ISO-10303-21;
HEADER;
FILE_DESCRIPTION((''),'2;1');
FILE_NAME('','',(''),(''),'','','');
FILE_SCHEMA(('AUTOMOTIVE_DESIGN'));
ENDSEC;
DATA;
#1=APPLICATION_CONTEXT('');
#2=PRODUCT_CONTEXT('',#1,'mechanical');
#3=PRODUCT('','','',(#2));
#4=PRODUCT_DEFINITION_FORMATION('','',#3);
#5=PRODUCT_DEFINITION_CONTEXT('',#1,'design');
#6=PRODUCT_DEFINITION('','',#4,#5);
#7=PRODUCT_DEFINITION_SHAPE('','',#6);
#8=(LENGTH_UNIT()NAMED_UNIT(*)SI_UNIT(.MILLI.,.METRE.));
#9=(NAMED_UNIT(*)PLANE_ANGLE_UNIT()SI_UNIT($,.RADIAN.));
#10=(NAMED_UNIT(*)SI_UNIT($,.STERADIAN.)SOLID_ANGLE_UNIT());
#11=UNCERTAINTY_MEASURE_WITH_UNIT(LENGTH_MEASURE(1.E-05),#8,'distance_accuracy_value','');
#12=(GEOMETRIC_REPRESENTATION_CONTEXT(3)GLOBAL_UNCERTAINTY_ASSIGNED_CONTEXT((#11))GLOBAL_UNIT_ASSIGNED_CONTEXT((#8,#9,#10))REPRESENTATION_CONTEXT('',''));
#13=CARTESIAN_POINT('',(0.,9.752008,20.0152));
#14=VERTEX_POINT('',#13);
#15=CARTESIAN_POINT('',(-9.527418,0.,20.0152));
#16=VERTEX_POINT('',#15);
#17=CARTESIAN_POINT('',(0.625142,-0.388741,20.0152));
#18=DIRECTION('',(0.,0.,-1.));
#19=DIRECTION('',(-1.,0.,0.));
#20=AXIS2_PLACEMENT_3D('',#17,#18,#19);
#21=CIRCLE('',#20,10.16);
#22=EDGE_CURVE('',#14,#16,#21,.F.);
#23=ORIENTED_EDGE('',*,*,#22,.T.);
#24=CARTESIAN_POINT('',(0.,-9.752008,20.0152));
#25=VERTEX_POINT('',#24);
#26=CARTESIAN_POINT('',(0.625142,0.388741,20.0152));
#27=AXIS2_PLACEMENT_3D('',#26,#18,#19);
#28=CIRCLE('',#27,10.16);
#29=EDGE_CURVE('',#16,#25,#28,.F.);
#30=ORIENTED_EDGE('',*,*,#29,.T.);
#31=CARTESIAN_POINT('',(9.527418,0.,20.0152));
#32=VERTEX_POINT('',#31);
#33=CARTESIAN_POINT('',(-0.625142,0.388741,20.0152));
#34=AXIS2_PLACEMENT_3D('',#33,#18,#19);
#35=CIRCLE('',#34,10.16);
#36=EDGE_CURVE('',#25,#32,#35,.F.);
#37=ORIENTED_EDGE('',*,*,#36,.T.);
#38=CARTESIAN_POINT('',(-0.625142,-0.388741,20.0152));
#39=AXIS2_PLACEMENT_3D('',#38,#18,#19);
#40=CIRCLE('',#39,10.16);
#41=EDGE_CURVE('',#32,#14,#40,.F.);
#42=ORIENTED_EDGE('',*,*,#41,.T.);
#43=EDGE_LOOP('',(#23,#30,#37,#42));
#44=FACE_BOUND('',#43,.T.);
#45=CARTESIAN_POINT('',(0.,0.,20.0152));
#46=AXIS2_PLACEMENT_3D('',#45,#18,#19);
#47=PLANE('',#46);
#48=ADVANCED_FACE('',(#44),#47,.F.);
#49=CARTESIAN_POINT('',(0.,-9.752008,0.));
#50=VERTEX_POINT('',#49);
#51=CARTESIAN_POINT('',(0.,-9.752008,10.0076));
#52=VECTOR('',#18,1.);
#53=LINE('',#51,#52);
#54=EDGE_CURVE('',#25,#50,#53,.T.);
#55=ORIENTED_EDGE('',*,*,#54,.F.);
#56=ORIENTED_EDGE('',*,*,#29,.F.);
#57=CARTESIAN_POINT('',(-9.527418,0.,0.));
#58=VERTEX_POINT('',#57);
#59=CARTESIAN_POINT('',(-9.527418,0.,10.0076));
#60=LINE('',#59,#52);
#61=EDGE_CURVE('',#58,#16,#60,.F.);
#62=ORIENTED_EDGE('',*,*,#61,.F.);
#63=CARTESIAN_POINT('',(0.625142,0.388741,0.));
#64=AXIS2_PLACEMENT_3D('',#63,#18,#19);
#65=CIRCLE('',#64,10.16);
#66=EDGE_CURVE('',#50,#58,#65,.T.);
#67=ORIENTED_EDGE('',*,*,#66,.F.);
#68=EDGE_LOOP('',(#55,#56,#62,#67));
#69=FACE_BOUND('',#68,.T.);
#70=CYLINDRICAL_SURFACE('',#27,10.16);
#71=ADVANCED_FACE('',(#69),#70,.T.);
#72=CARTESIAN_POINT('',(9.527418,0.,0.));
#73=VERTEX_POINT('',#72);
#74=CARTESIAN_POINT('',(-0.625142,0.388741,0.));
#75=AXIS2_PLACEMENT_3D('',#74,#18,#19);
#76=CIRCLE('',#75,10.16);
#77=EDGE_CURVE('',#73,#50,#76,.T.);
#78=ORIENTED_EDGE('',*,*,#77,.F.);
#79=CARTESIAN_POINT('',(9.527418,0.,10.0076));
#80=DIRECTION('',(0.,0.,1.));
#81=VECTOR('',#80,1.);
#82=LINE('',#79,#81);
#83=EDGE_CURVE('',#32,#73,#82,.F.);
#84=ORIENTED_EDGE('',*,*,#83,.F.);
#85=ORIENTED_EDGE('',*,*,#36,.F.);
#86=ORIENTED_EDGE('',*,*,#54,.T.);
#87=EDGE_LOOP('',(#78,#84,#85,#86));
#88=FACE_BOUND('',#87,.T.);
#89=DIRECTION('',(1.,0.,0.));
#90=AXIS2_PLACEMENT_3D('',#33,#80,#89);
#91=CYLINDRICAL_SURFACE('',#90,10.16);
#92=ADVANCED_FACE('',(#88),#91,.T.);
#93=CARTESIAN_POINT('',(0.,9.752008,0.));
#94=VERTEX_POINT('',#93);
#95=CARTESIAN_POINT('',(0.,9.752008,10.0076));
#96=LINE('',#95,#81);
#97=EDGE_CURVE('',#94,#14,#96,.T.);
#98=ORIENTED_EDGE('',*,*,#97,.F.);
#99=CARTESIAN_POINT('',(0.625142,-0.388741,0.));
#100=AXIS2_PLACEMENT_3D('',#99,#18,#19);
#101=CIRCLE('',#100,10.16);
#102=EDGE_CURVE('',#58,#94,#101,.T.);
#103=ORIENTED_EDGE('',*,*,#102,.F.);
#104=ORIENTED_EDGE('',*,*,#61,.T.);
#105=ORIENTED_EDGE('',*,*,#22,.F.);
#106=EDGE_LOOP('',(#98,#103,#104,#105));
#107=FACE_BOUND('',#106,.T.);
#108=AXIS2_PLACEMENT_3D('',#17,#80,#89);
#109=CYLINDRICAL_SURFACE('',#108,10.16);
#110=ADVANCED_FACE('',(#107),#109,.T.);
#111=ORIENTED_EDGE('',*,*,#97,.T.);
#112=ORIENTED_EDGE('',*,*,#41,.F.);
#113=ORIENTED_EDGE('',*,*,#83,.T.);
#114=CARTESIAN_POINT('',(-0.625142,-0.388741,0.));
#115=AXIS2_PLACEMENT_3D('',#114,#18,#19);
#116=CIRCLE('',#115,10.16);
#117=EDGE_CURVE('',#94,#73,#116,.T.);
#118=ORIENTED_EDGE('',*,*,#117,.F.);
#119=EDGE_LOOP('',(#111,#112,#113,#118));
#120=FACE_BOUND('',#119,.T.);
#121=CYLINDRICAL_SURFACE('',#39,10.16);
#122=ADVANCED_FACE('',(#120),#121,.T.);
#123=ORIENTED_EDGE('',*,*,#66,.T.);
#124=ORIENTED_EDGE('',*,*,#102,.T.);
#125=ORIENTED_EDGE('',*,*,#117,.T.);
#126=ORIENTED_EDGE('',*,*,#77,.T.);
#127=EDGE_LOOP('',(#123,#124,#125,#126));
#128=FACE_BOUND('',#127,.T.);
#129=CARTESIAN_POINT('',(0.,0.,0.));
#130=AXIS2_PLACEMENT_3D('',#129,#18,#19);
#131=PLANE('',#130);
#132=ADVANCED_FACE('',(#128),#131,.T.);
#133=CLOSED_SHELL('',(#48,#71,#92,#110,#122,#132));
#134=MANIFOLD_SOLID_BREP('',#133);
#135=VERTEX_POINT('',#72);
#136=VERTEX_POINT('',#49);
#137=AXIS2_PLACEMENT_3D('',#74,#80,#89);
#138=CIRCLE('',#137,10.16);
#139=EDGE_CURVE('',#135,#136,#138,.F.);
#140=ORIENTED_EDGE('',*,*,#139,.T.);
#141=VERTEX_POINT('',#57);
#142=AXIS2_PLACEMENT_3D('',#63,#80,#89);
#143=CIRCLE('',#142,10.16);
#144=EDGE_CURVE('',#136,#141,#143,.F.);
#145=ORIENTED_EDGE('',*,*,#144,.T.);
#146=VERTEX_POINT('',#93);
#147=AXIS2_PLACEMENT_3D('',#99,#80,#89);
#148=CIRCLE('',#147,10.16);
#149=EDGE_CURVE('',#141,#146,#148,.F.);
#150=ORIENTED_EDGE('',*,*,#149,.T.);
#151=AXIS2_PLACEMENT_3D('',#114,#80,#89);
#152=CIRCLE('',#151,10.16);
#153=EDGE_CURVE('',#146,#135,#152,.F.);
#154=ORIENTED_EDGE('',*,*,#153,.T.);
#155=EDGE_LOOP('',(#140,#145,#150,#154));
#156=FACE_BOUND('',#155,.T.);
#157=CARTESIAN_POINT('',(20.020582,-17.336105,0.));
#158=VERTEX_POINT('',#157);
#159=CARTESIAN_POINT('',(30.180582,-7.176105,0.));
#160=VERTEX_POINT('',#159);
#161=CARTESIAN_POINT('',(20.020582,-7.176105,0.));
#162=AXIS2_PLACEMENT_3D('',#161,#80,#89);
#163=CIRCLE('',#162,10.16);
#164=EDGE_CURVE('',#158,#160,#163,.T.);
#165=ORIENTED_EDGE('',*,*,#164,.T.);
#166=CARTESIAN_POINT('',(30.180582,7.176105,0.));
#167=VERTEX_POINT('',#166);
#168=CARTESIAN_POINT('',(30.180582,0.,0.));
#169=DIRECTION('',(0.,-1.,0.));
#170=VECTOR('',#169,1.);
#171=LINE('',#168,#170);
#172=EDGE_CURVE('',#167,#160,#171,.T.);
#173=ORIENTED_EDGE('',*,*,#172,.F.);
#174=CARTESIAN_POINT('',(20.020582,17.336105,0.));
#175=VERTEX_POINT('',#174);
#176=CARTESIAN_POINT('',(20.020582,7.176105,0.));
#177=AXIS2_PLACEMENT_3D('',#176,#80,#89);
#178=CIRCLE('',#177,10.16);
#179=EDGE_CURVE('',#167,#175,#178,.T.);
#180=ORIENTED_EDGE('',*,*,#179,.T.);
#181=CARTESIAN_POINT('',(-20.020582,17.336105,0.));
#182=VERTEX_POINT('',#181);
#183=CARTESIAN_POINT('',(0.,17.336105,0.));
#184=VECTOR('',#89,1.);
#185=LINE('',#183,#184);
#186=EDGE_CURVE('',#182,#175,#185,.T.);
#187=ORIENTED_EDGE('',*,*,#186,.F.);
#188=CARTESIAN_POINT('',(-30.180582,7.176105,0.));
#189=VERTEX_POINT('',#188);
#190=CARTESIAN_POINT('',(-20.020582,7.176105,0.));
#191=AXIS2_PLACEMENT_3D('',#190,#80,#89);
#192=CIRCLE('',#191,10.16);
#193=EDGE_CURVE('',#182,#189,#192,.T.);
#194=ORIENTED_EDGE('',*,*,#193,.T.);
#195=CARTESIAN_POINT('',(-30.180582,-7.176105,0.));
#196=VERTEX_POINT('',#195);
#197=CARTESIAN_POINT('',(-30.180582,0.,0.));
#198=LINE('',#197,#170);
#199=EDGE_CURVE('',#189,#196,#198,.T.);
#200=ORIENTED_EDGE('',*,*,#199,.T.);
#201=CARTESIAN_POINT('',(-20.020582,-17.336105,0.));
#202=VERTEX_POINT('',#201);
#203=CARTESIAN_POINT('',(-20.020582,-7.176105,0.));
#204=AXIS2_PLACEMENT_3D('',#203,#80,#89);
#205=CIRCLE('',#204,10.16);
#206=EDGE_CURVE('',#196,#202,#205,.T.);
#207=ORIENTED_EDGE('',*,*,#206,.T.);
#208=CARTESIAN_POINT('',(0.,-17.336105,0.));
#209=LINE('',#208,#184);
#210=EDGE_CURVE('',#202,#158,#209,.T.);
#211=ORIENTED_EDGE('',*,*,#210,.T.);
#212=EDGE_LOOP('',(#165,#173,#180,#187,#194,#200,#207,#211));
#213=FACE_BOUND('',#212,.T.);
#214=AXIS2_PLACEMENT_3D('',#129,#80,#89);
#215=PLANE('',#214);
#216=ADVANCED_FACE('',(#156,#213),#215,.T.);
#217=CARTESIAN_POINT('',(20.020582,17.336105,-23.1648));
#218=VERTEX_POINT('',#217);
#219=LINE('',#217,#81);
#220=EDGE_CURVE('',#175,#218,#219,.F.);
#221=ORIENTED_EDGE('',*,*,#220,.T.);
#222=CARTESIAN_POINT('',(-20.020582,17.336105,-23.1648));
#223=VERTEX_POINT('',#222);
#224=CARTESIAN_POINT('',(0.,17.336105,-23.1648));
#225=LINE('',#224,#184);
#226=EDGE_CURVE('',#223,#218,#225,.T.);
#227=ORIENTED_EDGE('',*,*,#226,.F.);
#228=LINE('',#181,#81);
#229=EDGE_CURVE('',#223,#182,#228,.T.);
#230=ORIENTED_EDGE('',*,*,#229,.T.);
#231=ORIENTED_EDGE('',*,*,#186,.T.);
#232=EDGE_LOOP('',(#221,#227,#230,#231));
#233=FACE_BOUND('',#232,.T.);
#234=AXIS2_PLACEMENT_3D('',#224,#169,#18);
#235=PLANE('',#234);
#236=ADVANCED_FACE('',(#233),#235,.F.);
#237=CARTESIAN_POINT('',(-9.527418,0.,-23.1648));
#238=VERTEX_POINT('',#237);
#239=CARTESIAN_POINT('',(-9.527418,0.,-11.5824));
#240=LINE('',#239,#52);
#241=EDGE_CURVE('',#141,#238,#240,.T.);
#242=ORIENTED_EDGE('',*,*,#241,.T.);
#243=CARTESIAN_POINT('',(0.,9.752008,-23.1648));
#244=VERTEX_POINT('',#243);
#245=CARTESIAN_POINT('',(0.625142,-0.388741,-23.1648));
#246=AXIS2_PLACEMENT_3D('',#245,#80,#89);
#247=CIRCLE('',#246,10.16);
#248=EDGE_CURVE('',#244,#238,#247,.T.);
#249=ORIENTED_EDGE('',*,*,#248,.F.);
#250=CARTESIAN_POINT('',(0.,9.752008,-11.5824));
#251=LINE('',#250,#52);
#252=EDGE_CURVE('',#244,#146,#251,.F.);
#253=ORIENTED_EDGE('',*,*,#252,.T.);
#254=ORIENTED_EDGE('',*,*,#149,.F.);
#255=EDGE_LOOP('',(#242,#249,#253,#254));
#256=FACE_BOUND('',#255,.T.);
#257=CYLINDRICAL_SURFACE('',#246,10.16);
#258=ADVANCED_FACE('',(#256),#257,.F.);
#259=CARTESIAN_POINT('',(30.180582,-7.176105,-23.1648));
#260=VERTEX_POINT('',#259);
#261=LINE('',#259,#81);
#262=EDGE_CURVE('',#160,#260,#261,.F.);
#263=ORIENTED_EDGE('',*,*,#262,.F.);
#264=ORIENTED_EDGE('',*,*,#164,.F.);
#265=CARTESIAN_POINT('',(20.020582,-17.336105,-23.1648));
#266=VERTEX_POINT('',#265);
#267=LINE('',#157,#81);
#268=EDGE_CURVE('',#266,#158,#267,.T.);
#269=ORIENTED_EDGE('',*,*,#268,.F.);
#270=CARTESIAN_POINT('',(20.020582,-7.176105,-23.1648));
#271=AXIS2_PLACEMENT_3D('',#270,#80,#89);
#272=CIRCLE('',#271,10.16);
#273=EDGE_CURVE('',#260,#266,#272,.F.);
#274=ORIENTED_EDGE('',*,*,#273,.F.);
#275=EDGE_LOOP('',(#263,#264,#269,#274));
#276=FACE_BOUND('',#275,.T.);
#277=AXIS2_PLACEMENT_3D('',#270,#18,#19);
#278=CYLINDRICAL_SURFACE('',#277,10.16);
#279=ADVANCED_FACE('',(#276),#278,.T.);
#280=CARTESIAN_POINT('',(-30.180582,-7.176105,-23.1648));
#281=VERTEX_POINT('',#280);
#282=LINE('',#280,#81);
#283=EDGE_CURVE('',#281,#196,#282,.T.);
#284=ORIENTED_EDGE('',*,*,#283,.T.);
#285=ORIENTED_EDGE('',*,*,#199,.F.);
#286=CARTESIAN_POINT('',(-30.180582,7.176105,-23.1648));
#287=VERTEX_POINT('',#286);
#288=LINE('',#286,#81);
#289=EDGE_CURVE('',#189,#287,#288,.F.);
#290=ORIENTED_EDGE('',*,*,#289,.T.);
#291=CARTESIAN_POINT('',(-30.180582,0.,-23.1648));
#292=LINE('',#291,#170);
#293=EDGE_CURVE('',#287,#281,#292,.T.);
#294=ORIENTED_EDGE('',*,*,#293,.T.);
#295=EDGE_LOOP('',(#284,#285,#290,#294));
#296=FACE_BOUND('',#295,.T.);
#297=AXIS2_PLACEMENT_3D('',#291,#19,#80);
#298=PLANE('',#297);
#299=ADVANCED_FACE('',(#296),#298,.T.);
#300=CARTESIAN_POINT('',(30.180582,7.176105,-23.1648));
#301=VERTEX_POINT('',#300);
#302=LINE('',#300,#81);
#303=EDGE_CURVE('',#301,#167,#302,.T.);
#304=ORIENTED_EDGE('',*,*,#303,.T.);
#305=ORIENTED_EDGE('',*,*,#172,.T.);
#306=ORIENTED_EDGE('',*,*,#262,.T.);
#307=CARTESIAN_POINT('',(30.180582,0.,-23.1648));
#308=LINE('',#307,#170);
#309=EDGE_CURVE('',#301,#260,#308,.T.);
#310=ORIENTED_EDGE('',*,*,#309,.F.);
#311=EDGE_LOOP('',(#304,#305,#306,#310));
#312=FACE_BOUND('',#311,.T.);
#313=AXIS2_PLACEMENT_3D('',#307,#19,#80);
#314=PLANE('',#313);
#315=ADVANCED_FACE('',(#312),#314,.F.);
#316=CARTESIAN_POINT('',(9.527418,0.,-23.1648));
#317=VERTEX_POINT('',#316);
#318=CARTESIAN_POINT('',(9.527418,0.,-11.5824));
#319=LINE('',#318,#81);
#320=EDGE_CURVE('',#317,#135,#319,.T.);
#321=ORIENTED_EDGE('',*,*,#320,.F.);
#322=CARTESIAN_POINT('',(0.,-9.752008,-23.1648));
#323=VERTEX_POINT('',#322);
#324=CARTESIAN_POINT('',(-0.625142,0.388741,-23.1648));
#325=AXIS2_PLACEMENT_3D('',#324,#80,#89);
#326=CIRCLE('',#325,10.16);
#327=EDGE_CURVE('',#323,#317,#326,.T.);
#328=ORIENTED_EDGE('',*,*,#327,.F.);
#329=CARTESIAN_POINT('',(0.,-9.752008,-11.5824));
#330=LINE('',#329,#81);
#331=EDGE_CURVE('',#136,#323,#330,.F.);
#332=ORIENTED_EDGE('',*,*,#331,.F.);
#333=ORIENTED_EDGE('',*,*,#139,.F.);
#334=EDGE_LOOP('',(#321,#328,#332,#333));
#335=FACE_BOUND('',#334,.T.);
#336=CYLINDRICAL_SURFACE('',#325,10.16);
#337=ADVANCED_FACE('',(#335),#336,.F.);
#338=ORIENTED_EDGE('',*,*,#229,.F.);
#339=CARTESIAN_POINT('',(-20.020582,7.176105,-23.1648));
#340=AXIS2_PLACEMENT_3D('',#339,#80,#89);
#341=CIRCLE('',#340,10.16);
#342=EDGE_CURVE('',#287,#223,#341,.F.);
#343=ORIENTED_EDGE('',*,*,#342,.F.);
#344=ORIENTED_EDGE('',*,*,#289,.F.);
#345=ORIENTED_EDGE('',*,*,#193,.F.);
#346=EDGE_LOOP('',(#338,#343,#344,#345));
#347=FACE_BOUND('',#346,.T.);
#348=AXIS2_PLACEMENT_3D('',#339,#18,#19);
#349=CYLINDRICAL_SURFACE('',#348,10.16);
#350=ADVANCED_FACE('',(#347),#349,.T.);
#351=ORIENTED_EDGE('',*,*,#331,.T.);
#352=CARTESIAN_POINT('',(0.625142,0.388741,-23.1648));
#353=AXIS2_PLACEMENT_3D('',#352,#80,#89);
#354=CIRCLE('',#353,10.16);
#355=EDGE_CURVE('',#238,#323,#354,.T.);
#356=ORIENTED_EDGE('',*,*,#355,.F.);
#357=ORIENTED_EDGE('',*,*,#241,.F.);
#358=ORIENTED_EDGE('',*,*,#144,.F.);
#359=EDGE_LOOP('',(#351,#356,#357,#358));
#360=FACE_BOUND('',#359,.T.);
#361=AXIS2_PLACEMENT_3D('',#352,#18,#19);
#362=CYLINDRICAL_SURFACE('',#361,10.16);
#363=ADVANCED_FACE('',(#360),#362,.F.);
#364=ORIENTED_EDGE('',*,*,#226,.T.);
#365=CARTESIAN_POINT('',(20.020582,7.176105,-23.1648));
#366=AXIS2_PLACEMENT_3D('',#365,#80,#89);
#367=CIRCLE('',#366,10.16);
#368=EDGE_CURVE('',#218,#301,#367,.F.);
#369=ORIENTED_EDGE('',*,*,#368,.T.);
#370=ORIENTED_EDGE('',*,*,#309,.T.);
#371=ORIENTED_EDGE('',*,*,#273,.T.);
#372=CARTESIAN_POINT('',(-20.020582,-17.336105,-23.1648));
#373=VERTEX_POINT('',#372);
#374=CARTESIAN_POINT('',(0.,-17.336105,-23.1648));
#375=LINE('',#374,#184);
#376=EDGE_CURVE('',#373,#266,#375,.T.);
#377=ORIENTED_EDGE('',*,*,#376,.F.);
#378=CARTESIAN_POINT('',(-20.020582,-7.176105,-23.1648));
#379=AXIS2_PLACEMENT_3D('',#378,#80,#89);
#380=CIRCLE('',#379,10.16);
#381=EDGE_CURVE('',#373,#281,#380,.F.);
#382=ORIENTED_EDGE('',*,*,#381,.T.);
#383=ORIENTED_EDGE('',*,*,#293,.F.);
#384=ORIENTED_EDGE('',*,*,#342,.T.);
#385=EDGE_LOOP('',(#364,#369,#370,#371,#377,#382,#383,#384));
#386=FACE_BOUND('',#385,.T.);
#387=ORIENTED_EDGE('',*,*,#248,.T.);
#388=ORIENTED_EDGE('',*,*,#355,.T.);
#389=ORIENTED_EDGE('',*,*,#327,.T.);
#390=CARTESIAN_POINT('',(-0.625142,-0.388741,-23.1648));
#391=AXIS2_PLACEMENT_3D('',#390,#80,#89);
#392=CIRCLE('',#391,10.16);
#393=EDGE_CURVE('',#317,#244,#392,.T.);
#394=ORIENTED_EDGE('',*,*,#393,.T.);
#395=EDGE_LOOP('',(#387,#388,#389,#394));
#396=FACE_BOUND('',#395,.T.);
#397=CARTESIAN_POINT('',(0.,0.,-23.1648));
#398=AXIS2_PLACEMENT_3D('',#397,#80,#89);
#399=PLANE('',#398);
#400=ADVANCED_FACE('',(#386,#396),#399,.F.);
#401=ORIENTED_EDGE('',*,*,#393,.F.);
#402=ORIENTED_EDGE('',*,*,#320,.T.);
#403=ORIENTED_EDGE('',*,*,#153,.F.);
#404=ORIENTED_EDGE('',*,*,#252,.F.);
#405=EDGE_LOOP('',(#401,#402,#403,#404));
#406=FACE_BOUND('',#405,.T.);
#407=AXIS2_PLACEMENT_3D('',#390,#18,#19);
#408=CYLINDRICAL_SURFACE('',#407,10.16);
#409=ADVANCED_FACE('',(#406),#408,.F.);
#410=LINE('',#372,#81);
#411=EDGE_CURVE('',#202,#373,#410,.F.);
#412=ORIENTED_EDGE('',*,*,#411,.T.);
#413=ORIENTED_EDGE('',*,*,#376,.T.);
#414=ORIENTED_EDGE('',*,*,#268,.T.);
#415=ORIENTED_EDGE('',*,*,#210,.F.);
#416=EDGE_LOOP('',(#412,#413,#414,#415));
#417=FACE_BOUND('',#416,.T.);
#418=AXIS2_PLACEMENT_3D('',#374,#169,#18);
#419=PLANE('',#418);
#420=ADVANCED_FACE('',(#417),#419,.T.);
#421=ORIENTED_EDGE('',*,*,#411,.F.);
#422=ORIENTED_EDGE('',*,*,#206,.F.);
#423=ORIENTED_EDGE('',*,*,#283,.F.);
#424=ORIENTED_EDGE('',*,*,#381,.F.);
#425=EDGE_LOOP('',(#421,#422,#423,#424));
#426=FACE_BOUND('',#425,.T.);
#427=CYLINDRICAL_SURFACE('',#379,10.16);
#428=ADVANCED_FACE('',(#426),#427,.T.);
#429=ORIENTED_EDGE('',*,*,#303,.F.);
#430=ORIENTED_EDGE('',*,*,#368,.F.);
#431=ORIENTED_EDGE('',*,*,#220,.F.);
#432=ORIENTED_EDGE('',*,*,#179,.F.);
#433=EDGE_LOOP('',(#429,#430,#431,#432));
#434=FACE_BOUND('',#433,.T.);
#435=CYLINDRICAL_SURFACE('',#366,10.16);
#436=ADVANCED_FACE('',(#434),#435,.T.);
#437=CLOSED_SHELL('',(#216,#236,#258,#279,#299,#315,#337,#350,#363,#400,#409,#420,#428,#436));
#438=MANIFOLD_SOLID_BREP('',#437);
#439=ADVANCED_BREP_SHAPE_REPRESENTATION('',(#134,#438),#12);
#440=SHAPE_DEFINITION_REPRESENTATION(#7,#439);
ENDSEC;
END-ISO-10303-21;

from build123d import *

# Parameters (mm, degrees)
SKETCH1_W           = 47.674288096
SKETCH1_H           = 48.856295238
BOSS_EXTRUDE1_DEPTH = 50.038
SKETCH1_4_W         = 150.902911904
SKETCH1_4_H         = 86.68052381
SKETCH1_4_W_2       = 47.674288096
SKETCH1_4_H_2       = 48.856295238
BOSS_EXTRUDE2_DEPTH = 57.912
FILLET1_R           = 25.4
FILLET2_R           = 25.4
SCALE2_SCALE        = 0.4


with BuildPart() as part:
    # Sketch1 → Boss-Extrude1 (new body)
    with BuildSketch(Plane.XY):
        Rectangle(SKETCH1_W, SKETCH1_H)
    extrude(amount=BOSS_EXTRUDE1_DEPTH)

    # Fillet2
    # the kernel refuses this fillet: 25.4 mm, written as the material it takes off along each edge
    with BuildSketch(Plane(origin=(23.837144048, 24.428147619, -63.5), x_dir=(-1, 0, 0), z_dir=(0, 0, 1)), Plane(origin=(23.837144048, -24.428147619, -63.5), x_dir=(0, 1, 0), z_dir=(0, 0, 1)), Plane(origin=(-23.837144048, -24.428147619, -63.5), x_dir=(1, 0, 0), z_dir=(0, 0, 1))) as fillet2_piece_1:
        with BuildLine():
            CenterArc((FILLET2_R, FILLET2_R), FILLET2_R, 180, 90)
            Line((0, FILLET2_R), (0, 0))
            Line((0, 0), (FILLET2_R, 0))
        make_face()
    extrude(amount=177.038, mode=Mode.SUBTRACT)
    with BuildSketch(Plane(origin=(-23.837144048, 24.428147619, -63.5), x_dir=(1, 0, 0), z_dir=(0, 0, 1))) as fillet2_piece_2:
        with BuildLine():
            CenterArc((FILLET2_R, -FILLET2_R), FILLET2_R, 90, 90)
            Line((0, -FILLET2_R), (0, 0))
            Line((0, 0), (FILLET2_R, 0))
        make_face()
    extrude(amount=177.038, mode=Mode.SUBTRACT)


with BuildPart() as body_2:
    # Sketch1<4> → Boss-Extrude2 (new body)
    with BuildSketch(Plane.XY):
        Rectangle(SKETCH1_4_W, SKETCH1_4_H)
        Rectangle(SKETCH1_4_W_2, SKETCH1_4_H_2, mode=Mode.SUBTRACT)
    extrude(amount=-BOSS_EXTRUDE2_DEPTH)

    # Fillet1
    # the kernel refuses this fillet: 25.4 mm, written as the material it adds along each edge
    with BuildSketch(Plane(origin=(-23.837144048, 24.428147619, 0), x_dir=(0, -1, 0), z_dir=(0, 0, -1))) as fillet1_piece_1:
        with BuildLine():
            CenterArc((FILLET1_R, -FILLET1_R), FILLET1_R, 90, 90)
            Line((0, -FILLET1_R), (0, 0))
            Line((0, 0), (FILLET1_R, 0))
        make_face()
    extrude(amount=57.912)
    with BuildSketch(Plane(origin=(23.837144048, 24.428147619, 0), x_dir=(0, -1, 0), z_dir=(0, 0, -1)), Plane(origin=(23.837144048, -24.428147619, 0), x_dir=(-1, 0, 0), z_dir=(0, 0, -1)), Plane(origin=(-23.837144048, -24.428147619, 0), x_dir=(0, 1, 0), z_dir=(0, 0, -1))) as fillet1_piece_2:
        with BuildLine():
            CenterArc((FILLET1_R, FILLET1_R), FILLET1_R, 180, 90)
            Line((0, FILLET1_R), (0, 0))
            Line((0, 0), (FILLET1_R, 0))
        make_face()
    extrude(amount=57.912)
    # the kernel refuses this fillet: 25.4 mm, written as the material it takes off along each edge
    with BuildSketch(Plane(origin=(-75.451455952, 43.340261905, 63.5), x_dir=(1, 0, 0), z_dir=(0, 0, -1)), Plane(origin=(75.451455952, 43.340261905, 63.5), x_dir=(0, -1, 0), z_dir=(0, 0, -1))) as fillet1_2_piece_1:
        with BuildLine():
            CenterArc((FILLET1_R, FILLET1_R), FILLET1_R, 180, 90)
            Line((0, FILLET1_R), (0, 0))
            Line((0, 0), (FILLET1_R, 0))
        make_face()
    extrude(amount=184.912, mode=Mode.SUBTRACT)
    with BuildSketch(Plane(origin=(-75.451455952, -43.340261905, 63.5), x_dir=(1, 0, 0), z_dir=(0, 0, -1)), Plane(origin=(75.451455952, -43.340261905, 63.5), x_dir=(0, 1, 0), z_dir=(0, 0, -1))) as fillet1_2_piece_2:
        with BuildLine():
            CenterArc((FILLET1_R, -FILLET1_R), FILLET1_R, 90, 90)
            Line((0, -FILLET1_R), (0, 0))
            Line((0, 0), (FILLET1_R, 0))
        make_face()
    extrude(amount=184.912, mode=Mode.SUBTRACT)


with BuildPart() as body_2_1:
    # Scale2: scaled about (0, 0, 0)
    add(body_2.part.scale(SCALE2_SCALE))


with BuildPart() as part_1:
    # Scale2: scaled about (0, 0, 0)
    add(part.part.scale(SCALE2_SCALE))


solid = Compound([body_2_1.part, part_1.part])
